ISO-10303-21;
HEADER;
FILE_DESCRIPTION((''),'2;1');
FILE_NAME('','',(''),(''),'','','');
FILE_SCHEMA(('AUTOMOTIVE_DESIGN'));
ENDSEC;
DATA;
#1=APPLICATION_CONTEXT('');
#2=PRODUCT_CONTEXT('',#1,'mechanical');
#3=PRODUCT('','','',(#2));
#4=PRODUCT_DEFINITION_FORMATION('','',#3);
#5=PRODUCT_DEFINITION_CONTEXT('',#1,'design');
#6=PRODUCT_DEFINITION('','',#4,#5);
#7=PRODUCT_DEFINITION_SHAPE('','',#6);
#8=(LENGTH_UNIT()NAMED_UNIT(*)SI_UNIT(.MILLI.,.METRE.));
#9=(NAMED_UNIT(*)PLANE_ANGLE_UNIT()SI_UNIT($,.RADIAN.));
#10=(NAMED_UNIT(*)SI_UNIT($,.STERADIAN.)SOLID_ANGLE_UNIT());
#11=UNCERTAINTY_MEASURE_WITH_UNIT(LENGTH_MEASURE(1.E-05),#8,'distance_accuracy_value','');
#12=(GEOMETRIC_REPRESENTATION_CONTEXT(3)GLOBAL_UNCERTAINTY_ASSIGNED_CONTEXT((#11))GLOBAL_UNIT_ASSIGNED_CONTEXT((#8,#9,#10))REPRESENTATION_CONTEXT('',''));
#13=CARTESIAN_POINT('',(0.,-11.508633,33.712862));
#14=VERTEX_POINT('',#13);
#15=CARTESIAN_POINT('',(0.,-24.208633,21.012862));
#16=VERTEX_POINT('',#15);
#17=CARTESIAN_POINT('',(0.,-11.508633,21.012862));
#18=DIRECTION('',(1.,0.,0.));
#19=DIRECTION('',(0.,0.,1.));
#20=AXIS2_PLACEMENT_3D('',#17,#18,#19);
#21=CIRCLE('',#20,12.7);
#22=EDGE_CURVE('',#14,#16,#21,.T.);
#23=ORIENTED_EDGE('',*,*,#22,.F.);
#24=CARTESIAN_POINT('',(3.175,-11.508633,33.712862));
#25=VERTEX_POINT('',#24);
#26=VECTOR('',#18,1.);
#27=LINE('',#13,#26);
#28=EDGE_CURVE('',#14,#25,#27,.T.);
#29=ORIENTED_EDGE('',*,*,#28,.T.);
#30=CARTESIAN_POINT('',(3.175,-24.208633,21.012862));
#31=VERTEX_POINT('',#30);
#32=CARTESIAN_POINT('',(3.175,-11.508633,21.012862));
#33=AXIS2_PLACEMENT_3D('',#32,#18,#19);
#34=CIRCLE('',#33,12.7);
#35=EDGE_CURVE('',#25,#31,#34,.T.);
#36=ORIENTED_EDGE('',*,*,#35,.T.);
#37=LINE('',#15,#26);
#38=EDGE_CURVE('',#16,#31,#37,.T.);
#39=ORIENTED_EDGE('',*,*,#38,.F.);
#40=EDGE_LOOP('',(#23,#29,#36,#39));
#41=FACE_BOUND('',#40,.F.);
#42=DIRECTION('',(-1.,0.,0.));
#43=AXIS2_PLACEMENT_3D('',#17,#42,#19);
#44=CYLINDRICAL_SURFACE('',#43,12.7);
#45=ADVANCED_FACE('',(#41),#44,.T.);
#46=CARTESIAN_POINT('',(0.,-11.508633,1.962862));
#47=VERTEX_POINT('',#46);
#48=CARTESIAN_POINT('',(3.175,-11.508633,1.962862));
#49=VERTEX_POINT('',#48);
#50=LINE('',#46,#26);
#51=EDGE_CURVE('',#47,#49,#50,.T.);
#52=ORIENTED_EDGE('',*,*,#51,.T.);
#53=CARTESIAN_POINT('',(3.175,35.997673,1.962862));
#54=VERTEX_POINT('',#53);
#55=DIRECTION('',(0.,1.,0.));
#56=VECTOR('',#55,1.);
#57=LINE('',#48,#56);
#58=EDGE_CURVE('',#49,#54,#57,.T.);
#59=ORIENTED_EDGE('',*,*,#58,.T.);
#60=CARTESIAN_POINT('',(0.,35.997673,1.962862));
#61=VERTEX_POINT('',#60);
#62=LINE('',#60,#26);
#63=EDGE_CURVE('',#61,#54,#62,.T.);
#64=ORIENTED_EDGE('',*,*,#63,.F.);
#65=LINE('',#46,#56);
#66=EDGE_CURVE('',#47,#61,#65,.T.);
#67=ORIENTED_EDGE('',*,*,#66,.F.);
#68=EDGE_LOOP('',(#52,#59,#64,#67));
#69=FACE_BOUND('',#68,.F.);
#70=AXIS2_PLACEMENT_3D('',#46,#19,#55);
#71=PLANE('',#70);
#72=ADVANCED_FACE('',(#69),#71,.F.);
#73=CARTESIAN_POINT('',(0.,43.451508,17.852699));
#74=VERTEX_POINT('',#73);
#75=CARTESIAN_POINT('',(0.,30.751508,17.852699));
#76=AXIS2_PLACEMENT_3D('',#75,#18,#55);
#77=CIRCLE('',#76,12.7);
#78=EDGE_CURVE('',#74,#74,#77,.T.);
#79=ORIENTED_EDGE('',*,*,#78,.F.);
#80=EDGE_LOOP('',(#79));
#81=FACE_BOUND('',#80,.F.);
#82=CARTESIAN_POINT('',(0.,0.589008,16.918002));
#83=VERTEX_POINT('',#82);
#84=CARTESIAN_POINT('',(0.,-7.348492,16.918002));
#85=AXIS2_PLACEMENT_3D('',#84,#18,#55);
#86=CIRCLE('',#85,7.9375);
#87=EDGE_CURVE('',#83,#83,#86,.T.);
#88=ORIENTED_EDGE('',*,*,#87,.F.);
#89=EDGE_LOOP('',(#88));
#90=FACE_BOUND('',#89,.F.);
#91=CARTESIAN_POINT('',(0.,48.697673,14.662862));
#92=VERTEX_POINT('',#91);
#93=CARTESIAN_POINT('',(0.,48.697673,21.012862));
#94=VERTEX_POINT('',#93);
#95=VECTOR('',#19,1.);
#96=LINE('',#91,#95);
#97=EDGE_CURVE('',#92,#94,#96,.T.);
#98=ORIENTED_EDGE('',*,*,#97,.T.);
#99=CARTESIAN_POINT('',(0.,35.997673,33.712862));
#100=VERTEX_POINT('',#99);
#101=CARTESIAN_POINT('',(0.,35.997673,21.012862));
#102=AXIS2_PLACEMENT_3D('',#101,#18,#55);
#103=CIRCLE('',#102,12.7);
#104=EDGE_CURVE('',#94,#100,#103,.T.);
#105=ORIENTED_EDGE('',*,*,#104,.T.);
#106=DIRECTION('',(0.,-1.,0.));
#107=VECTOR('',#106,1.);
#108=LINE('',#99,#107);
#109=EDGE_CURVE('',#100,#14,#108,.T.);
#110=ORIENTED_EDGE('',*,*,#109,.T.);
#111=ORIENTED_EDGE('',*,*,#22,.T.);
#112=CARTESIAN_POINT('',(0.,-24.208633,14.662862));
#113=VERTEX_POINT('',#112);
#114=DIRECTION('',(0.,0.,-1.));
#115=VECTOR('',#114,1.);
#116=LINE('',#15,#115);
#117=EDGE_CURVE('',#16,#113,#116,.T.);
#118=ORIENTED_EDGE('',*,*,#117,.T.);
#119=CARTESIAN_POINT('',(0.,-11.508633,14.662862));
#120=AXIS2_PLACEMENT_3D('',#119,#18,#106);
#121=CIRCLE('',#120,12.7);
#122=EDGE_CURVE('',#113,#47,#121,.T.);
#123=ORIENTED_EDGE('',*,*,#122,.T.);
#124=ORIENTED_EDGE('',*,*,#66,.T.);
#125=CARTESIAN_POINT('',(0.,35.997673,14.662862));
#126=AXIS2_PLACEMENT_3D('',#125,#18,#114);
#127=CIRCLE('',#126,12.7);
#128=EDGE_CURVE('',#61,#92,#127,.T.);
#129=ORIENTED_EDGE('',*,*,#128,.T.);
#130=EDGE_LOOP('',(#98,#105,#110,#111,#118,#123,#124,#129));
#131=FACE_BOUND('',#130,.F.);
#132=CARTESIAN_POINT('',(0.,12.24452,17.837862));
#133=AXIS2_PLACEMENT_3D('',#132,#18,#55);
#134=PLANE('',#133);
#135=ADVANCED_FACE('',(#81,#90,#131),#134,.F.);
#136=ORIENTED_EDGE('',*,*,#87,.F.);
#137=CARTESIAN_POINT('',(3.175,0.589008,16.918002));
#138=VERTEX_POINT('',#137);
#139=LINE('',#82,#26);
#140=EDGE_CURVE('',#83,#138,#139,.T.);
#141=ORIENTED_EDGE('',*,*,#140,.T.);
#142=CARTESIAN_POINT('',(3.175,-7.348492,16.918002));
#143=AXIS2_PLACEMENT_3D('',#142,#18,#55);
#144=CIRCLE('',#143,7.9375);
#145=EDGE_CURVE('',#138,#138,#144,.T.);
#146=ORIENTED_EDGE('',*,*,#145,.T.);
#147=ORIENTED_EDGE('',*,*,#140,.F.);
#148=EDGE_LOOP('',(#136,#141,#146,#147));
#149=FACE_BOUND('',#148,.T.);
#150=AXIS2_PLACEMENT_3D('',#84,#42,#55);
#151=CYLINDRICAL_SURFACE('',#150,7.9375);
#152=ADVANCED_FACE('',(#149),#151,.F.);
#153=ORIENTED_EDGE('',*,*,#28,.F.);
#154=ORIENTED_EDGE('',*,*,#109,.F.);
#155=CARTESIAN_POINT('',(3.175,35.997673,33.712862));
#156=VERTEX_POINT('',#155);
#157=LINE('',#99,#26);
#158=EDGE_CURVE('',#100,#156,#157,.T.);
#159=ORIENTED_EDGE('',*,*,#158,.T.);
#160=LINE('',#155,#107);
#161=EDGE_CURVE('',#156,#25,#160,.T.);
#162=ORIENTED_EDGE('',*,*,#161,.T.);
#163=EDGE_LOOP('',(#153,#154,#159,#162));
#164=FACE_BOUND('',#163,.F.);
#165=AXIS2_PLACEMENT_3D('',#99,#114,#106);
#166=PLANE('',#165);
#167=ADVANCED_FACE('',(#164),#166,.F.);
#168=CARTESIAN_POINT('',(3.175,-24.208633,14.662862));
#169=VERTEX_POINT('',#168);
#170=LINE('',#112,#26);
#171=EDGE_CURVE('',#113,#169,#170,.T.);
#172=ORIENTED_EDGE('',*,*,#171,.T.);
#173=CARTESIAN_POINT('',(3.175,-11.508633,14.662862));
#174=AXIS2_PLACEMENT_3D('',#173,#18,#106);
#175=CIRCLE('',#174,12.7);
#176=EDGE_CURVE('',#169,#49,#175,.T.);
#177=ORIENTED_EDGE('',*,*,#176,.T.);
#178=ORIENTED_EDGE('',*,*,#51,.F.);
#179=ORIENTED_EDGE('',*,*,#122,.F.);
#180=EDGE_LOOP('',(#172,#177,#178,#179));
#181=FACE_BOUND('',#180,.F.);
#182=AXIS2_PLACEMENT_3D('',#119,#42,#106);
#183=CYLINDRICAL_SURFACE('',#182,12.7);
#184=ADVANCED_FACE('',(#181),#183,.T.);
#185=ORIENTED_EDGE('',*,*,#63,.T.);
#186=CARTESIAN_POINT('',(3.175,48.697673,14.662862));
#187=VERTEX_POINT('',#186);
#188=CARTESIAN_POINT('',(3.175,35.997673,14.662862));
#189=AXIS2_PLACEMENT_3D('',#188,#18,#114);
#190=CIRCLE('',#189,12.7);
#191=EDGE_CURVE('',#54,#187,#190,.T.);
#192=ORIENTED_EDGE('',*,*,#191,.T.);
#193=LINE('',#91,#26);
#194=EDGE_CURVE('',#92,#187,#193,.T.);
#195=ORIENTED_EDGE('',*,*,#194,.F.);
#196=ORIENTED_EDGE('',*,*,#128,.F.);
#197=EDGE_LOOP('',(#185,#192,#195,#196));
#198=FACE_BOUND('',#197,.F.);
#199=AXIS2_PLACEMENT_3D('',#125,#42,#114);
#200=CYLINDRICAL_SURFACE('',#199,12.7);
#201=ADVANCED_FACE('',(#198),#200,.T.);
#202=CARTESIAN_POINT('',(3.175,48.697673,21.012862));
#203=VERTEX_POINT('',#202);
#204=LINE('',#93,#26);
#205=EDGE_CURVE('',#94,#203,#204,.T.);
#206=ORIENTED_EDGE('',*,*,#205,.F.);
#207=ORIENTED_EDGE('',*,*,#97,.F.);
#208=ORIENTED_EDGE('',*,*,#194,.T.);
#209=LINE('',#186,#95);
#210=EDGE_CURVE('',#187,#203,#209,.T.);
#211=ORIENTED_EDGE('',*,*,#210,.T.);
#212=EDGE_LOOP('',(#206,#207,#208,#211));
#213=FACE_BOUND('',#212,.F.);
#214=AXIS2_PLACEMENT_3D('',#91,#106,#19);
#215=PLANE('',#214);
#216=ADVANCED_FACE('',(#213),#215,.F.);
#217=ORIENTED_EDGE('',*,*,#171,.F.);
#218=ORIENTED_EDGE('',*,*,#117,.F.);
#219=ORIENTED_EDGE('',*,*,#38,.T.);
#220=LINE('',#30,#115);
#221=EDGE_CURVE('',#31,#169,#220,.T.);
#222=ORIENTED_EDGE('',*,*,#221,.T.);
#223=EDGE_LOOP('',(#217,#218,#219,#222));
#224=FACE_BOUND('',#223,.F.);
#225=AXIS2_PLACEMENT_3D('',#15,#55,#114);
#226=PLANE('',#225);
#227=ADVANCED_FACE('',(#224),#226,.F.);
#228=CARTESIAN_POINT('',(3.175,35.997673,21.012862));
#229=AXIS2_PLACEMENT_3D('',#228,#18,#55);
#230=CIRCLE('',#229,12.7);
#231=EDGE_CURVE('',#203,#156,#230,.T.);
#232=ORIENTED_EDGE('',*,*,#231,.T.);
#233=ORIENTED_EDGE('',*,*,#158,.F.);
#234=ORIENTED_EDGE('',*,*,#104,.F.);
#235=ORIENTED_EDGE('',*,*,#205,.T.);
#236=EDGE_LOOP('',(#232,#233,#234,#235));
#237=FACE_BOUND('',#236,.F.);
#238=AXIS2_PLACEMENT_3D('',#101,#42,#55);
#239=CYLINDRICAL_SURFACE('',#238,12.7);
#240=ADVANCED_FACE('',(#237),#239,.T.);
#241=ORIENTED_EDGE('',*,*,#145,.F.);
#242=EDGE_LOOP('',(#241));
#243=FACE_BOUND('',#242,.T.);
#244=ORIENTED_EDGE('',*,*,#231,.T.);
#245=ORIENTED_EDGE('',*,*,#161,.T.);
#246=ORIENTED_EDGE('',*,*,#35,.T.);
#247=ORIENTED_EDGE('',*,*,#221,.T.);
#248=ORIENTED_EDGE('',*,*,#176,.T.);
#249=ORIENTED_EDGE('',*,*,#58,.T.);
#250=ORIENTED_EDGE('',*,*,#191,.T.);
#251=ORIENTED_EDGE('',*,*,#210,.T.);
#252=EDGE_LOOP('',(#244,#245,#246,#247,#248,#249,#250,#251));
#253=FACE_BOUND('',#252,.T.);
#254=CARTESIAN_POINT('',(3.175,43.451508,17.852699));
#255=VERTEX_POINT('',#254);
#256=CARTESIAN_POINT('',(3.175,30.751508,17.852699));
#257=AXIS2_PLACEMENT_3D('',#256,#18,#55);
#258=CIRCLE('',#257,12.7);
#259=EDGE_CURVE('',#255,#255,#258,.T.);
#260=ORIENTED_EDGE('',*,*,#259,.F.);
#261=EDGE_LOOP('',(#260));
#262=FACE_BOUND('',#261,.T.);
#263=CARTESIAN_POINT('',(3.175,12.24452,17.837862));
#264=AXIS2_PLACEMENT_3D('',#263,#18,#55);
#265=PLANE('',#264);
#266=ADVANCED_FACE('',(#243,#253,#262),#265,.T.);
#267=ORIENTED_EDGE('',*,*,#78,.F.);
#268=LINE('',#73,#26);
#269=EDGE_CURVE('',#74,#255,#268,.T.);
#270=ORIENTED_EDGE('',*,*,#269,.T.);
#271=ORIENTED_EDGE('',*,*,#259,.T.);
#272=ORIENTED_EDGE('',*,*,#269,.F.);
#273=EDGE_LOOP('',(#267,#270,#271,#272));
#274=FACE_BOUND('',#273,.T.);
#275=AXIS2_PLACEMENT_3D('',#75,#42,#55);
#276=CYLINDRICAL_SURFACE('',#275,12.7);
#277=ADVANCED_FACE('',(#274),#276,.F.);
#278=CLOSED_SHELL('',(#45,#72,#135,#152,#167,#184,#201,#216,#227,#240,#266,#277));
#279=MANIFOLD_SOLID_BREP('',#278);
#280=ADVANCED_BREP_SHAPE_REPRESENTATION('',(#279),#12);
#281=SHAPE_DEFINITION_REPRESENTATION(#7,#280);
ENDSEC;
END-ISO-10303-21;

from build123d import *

# Parameters (mm, degrees)
F0_R     = 7.9375
F0_R_2   = 12.7
F1_DEPTH = 3.175


# Not quite as in the source:
# - a length typed as a fraction of an inch, garbled in the dataset ("3 / 203.2 mm" for 3/8 in), is restored


with BuildPart() as f1:
    # F0 (on Right) → F1 (new body)
    with BuildSketch(Plane.YZ):
        with BuildLine():
            Line((35.9976727843, 33.7128622103), (-11.5086332291, 33.7128622103))
            ThreePointArc((-11.5086332291, 33.7128622103), (-20.4888893502, 29.9931183314), (-24.2086332291, 21.0128622103))
            Line((-24.2086332291, 21.0128622103), (-24.2086332291, 14.6628622103))
            ThreePointArc((-24.2086332291, 14.6628622103), (-20.4888893502, 5.6826060893), (-11.5086332291, 1.9628622103))
            Line((-11.5086332291, 1.9628622103), (35.9976727843, 1.9628622103))
            ThreePointArc((35.9976727843, 1.9628622103), (44.9779289054, 5.6826060893), (48.6976727843, 14.6628622103))
            Line((48.6976727843, 14.6628622103), (48.6976727843, 21.0128622103))
            ThreePointArc((48.6976727843, 21.0128622103), (44.9779289054, 29.9931183314), (35.9976727843, 33.7128622103))
        make_face()
        with Locations((-7.3484922707, 16.9180016965)):
            Circle(F0_R, mode=Mode.SUBTRACT)
        with Locations((30.7515077293, 17.8526993841)):
            Circle(F0_R_2, mode=Mode.SUBTRACT)
    extrude(amount=F1_DEPTH)


solid = f1.part
